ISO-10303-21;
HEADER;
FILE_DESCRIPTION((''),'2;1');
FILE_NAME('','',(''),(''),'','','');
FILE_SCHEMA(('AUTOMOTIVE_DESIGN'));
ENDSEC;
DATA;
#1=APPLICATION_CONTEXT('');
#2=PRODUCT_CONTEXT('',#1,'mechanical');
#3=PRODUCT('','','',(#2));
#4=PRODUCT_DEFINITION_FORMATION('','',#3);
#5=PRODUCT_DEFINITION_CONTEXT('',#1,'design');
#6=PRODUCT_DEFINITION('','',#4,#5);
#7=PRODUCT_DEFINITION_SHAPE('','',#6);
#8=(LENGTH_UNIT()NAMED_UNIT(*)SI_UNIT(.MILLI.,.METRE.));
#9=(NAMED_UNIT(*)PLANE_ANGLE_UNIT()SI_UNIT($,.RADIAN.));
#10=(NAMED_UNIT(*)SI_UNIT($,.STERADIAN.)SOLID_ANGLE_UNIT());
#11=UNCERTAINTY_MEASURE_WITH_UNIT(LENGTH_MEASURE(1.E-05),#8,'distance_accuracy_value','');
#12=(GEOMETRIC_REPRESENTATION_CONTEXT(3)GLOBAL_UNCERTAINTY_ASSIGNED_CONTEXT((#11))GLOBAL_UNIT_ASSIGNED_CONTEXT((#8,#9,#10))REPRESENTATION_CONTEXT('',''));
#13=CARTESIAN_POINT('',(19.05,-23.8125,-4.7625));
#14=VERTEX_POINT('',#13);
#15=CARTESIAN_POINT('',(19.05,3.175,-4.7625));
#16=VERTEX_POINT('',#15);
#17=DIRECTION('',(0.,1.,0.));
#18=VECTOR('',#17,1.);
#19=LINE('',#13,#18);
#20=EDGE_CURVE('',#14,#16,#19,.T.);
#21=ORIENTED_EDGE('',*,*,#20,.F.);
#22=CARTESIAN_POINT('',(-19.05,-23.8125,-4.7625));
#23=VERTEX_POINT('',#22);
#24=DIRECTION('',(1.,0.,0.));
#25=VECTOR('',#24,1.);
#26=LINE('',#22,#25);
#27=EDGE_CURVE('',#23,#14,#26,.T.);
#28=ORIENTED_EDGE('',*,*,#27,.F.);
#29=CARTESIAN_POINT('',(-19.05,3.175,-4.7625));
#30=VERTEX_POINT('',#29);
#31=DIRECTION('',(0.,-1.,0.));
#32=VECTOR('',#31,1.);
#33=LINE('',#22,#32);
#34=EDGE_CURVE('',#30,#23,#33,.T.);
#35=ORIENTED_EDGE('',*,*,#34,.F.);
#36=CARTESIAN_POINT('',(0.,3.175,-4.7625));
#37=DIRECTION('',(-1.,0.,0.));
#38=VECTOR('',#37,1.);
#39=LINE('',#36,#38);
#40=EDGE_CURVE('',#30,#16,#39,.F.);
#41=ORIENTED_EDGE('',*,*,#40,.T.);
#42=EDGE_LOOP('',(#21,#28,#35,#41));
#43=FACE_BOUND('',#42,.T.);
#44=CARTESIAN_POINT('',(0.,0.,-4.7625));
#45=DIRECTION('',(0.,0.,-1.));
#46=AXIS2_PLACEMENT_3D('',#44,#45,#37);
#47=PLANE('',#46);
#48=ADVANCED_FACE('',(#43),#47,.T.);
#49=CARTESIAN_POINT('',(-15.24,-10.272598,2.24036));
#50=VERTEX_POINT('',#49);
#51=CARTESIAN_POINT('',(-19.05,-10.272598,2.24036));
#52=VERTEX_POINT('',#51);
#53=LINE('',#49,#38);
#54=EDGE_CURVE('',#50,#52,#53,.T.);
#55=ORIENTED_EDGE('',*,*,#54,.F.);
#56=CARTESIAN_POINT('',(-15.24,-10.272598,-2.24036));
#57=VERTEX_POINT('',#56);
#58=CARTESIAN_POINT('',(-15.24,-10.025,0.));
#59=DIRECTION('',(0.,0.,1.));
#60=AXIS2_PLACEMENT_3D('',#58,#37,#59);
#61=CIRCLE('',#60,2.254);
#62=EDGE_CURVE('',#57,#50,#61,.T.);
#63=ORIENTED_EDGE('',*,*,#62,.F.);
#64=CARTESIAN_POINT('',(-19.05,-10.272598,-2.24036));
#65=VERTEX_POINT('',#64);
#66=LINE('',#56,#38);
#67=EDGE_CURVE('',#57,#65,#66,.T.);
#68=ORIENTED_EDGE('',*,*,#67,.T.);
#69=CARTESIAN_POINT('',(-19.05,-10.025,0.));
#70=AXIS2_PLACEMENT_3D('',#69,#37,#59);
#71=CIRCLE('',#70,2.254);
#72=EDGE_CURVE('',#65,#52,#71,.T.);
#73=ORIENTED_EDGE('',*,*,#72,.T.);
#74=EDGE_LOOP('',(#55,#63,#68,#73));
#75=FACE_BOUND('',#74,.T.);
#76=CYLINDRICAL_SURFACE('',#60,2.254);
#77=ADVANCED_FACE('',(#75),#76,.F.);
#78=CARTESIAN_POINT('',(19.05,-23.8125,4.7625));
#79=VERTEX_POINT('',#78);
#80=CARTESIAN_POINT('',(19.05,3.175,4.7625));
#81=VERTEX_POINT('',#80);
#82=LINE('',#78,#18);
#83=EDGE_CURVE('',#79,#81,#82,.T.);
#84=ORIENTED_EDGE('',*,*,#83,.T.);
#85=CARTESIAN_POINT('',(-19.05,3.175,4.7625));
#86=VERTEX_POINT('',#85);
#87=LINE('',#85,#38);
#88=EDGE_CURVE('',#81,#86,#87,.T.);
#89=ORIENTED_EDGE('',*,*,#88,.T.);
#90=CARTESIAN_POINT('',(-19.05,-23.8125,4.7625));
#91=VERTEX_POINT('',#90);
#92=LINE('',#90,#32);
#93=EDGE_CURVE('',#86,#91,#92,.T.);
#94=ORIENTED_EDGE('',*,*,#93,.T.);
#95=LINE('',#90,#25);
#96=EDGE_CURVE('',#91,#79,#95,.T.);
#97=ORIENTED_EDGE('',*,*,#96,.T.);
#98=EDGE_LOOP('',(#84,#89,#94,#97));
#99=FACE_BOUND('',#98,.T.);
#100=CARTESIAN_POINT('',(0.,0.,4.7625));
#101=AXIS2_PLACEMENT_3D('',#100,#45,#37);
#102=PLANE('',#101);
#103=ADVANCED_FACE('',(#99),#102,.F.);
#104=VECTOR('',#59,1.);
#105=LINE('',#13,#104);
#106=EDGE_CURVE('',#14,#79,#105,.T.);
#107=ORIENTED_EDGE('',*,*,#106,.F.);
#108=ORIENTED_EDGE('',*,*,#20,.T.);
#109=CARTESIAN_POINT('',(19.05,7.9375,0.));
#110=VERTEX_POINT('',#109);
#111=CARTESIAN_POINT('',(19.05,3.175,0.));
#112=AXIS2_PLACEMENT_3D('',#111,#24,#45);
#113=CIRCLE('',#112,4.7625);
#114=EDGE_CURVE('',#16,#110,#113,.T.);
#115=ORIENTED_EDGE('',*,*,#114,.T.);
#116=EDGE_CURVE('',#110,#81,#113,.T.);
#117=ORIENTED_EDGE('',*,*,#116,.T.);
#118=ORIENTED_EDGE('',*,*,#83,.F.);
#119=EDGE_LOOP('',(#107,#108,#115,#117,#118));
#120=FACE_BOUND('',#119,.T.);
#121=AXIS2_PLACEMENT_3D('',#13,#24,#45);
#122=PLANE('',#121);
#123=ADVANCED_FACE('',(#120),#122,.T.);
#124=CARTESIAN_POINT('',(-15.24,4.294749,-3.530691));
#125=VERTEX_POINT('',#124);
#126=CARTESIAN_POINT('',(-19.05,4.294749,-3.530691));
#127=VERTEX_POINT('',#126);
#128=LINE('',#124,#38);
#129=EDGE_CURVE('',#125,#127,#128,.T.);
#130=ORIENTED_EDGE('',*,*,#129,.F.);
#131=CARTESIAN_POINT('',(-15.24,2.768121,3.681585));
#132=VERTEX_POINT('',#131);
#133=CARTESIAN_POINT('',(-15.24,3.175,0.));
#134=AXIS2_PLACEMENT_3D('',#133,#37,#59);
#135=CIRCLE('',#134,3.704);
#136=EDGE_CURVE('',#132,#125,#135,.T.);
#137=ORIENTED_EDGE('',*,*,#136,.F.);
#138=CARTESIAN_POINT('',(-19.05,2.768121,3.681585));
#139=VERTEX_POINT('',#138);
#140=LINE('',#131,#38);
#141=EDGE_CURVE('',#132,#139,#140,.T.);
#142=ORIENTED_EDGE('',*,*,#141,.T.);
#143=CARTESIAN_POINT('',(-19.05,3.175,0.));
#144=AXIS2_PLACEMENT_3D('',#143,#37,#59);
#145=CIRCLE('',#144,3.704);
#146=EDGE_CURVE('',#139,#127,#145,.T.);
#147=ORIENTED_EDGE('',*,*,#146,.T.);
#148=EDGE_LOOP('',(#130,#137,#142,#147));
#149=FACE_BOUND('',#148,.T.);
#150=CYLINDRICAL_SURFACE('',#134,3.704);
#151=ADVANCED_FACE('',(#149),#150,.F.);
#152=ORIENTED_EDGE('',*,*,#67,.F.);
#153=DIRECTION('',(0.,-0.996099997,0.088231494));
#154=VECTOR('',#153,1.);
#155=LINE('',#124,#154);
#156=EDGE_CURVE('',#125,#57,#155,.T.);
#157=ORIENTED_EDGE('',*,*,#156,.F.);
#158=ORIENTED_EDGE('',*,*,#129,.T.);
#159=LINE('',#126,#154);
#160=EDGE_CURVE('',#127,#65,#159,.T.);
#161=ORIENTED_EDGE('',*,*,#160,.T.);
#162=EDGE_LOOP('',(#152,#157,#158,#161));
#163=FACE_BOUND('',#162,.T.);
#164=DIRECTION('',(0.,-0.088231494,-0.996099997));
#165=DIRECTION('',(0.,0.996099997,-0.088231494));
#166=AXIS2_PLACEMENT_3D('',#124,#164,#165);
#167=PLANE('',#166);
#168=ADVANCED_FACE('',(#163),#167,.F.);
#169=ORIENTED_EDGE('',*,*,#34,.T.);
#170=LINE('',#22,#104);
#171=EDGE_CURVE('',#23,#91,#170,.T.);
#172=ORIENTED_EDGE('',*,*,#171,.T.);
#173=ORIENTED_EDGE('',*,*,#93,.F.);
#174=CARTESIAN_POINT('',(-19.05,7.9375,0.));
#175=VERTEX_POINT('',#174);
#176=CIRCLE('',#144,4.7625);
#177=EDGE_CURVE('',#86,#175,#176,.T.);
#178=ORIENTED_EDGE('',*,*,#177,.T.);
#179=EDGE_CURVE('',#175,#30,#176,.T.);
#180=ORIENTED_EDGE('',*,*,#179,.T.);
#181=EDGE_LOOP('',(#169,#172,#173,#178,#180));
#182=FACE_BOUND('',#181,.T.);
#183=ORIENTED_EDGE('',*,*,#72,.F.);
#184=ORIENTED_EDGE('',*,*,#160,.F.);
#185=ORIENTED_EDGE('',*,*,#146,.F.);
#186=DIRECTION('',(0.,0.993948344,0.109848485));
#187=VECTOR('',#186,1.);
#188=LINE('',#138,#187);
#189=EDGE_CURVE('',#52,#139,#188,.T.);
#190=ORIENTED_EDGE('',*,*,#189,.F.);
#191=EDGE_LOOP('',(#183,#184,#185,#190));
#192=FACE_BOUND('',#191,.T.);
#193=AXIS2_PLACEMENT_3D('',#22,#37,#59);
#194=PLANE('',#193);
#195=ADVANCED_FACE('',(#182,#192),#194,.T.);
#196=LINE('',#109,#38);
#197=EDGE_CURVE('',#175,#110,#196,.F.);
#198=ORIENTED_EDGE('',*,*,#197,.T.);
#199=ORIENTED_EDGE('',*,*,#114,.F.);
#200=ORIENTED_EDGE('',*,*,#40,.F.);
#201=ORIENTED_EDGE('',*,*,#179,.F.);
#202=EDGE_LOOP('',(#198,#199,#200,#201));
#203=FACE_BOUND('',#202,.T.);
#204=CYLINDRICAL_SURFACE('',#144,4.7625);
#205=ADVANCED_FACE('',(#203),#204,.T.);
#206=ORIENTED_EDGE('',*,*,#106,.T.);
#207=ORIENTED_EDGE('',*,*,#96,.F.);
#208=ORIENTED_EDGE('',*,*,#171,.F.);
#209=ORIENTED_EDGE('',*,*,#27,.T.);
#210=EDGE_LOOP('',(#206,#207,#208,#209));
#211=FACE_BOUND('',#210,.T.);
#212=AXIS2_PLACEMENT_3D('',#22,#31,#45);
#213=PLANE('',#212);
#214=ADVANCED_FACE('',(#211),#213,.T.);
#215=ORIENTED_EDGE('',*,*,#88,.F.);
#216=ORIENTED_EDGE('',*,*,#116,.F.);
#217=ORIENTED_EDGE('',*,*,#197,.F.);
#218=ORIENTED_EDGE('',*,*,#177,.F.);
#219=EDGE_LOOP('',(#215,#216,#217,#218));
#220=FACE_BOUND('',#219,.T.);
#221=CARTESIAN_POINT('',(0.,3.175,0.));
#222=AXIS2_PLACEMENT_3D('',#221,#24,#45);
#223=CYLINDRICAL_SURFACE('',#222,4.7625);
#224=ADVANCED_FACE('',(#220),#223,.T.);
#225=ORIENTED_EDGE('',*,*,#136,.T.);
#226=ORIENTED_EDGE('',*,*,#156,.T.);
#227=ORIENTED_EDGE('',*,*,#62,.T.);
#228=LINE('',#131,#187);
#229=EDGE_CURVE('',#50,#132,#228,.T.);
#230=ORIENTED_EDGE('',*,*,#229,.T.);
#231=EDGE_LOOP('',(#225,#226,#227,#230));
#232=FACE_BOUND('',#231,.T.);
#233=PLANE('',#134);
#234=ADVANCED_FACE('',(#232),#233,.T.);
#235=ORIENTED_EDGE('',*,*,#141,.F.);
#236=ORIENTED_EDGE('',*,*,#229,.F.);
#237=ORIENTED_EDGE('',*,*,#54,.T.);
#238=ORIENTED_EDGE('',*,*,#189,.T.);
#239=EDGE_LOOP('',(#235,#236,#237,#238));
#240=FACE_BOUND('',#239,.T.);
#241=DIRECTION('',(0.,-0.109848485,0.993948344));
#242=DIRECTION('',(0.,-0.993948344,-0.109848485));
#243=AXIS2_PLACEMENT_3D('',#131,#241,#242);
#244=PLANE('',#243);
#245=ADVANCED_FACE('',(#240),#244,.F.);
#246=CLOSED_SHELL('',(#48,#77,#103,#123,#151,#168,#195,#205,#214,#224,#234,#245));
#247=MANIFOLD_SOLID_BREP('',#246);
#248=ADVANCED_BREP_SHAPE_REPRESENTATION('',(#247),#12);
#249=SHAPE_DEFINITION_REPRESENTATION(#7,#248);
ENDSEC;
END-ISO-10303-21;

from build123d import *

# Parameters (mm, degrees)
MAIN_DEPTH            = 4.7625
MAIN_DEPTH_BACK       = 4.7625
SKETCH1_W             = 38.1
SKETCH1_H             = 31.75
FILLET_2_R            = 4.7625
SERVOHORNPOCKET_DEPTH = 3.81


with BuildPart() as part:
    # Sketch1 → Main (new, two sides: drawn at the far end of the back side and taken through both)
    with BuildSketch(Plane.XY.offset(-MAIN_DEPTH_BACK)):
        with Locations((0, -7.9375)):
            Rectangle(SKETCH1_W, SKETCH1_H)
    extrude(amount=MAIN_DEPTH + MAIN_DEPTH_BACK)

    # Fillet 2
    fillet_2_edges = [part.edges().sort_by_distance(p)[0] for p in [
        (0, 7.9375, -4.7625),
        (0, 7.9375, 4.7625),
    ]]
    fillet(fillet_2_edges, radius=FILLET_2_R - 0.0001)  # a hair under: the kernel refuses the full size

    # Sketch2 → ServoHornPocket (cut)
    with BuildSketch(Plane.ZY.offset(19.05)):
        with BuildLine():
            Line((3.681584666, 2.768121212), (2.240359567, -10.272598485))
            ThreePointArc((2.240359567, -10.272598485), (0, -12.279), (-2.240359567, -10.272598485))
            Line((-2.240359567, -10.272598485), (-3.530690742, 4.294749474))
            ThreePointArc((-3.530690742, 4.294749474), (0.767033706, 6.798710156), (3.681584666, 2.768121212))
        make_face()
    extrude(amount=-SERVOHORNPOCKET_DEPTH, mode=Mode.SUBTRACT)


solid = part.part
